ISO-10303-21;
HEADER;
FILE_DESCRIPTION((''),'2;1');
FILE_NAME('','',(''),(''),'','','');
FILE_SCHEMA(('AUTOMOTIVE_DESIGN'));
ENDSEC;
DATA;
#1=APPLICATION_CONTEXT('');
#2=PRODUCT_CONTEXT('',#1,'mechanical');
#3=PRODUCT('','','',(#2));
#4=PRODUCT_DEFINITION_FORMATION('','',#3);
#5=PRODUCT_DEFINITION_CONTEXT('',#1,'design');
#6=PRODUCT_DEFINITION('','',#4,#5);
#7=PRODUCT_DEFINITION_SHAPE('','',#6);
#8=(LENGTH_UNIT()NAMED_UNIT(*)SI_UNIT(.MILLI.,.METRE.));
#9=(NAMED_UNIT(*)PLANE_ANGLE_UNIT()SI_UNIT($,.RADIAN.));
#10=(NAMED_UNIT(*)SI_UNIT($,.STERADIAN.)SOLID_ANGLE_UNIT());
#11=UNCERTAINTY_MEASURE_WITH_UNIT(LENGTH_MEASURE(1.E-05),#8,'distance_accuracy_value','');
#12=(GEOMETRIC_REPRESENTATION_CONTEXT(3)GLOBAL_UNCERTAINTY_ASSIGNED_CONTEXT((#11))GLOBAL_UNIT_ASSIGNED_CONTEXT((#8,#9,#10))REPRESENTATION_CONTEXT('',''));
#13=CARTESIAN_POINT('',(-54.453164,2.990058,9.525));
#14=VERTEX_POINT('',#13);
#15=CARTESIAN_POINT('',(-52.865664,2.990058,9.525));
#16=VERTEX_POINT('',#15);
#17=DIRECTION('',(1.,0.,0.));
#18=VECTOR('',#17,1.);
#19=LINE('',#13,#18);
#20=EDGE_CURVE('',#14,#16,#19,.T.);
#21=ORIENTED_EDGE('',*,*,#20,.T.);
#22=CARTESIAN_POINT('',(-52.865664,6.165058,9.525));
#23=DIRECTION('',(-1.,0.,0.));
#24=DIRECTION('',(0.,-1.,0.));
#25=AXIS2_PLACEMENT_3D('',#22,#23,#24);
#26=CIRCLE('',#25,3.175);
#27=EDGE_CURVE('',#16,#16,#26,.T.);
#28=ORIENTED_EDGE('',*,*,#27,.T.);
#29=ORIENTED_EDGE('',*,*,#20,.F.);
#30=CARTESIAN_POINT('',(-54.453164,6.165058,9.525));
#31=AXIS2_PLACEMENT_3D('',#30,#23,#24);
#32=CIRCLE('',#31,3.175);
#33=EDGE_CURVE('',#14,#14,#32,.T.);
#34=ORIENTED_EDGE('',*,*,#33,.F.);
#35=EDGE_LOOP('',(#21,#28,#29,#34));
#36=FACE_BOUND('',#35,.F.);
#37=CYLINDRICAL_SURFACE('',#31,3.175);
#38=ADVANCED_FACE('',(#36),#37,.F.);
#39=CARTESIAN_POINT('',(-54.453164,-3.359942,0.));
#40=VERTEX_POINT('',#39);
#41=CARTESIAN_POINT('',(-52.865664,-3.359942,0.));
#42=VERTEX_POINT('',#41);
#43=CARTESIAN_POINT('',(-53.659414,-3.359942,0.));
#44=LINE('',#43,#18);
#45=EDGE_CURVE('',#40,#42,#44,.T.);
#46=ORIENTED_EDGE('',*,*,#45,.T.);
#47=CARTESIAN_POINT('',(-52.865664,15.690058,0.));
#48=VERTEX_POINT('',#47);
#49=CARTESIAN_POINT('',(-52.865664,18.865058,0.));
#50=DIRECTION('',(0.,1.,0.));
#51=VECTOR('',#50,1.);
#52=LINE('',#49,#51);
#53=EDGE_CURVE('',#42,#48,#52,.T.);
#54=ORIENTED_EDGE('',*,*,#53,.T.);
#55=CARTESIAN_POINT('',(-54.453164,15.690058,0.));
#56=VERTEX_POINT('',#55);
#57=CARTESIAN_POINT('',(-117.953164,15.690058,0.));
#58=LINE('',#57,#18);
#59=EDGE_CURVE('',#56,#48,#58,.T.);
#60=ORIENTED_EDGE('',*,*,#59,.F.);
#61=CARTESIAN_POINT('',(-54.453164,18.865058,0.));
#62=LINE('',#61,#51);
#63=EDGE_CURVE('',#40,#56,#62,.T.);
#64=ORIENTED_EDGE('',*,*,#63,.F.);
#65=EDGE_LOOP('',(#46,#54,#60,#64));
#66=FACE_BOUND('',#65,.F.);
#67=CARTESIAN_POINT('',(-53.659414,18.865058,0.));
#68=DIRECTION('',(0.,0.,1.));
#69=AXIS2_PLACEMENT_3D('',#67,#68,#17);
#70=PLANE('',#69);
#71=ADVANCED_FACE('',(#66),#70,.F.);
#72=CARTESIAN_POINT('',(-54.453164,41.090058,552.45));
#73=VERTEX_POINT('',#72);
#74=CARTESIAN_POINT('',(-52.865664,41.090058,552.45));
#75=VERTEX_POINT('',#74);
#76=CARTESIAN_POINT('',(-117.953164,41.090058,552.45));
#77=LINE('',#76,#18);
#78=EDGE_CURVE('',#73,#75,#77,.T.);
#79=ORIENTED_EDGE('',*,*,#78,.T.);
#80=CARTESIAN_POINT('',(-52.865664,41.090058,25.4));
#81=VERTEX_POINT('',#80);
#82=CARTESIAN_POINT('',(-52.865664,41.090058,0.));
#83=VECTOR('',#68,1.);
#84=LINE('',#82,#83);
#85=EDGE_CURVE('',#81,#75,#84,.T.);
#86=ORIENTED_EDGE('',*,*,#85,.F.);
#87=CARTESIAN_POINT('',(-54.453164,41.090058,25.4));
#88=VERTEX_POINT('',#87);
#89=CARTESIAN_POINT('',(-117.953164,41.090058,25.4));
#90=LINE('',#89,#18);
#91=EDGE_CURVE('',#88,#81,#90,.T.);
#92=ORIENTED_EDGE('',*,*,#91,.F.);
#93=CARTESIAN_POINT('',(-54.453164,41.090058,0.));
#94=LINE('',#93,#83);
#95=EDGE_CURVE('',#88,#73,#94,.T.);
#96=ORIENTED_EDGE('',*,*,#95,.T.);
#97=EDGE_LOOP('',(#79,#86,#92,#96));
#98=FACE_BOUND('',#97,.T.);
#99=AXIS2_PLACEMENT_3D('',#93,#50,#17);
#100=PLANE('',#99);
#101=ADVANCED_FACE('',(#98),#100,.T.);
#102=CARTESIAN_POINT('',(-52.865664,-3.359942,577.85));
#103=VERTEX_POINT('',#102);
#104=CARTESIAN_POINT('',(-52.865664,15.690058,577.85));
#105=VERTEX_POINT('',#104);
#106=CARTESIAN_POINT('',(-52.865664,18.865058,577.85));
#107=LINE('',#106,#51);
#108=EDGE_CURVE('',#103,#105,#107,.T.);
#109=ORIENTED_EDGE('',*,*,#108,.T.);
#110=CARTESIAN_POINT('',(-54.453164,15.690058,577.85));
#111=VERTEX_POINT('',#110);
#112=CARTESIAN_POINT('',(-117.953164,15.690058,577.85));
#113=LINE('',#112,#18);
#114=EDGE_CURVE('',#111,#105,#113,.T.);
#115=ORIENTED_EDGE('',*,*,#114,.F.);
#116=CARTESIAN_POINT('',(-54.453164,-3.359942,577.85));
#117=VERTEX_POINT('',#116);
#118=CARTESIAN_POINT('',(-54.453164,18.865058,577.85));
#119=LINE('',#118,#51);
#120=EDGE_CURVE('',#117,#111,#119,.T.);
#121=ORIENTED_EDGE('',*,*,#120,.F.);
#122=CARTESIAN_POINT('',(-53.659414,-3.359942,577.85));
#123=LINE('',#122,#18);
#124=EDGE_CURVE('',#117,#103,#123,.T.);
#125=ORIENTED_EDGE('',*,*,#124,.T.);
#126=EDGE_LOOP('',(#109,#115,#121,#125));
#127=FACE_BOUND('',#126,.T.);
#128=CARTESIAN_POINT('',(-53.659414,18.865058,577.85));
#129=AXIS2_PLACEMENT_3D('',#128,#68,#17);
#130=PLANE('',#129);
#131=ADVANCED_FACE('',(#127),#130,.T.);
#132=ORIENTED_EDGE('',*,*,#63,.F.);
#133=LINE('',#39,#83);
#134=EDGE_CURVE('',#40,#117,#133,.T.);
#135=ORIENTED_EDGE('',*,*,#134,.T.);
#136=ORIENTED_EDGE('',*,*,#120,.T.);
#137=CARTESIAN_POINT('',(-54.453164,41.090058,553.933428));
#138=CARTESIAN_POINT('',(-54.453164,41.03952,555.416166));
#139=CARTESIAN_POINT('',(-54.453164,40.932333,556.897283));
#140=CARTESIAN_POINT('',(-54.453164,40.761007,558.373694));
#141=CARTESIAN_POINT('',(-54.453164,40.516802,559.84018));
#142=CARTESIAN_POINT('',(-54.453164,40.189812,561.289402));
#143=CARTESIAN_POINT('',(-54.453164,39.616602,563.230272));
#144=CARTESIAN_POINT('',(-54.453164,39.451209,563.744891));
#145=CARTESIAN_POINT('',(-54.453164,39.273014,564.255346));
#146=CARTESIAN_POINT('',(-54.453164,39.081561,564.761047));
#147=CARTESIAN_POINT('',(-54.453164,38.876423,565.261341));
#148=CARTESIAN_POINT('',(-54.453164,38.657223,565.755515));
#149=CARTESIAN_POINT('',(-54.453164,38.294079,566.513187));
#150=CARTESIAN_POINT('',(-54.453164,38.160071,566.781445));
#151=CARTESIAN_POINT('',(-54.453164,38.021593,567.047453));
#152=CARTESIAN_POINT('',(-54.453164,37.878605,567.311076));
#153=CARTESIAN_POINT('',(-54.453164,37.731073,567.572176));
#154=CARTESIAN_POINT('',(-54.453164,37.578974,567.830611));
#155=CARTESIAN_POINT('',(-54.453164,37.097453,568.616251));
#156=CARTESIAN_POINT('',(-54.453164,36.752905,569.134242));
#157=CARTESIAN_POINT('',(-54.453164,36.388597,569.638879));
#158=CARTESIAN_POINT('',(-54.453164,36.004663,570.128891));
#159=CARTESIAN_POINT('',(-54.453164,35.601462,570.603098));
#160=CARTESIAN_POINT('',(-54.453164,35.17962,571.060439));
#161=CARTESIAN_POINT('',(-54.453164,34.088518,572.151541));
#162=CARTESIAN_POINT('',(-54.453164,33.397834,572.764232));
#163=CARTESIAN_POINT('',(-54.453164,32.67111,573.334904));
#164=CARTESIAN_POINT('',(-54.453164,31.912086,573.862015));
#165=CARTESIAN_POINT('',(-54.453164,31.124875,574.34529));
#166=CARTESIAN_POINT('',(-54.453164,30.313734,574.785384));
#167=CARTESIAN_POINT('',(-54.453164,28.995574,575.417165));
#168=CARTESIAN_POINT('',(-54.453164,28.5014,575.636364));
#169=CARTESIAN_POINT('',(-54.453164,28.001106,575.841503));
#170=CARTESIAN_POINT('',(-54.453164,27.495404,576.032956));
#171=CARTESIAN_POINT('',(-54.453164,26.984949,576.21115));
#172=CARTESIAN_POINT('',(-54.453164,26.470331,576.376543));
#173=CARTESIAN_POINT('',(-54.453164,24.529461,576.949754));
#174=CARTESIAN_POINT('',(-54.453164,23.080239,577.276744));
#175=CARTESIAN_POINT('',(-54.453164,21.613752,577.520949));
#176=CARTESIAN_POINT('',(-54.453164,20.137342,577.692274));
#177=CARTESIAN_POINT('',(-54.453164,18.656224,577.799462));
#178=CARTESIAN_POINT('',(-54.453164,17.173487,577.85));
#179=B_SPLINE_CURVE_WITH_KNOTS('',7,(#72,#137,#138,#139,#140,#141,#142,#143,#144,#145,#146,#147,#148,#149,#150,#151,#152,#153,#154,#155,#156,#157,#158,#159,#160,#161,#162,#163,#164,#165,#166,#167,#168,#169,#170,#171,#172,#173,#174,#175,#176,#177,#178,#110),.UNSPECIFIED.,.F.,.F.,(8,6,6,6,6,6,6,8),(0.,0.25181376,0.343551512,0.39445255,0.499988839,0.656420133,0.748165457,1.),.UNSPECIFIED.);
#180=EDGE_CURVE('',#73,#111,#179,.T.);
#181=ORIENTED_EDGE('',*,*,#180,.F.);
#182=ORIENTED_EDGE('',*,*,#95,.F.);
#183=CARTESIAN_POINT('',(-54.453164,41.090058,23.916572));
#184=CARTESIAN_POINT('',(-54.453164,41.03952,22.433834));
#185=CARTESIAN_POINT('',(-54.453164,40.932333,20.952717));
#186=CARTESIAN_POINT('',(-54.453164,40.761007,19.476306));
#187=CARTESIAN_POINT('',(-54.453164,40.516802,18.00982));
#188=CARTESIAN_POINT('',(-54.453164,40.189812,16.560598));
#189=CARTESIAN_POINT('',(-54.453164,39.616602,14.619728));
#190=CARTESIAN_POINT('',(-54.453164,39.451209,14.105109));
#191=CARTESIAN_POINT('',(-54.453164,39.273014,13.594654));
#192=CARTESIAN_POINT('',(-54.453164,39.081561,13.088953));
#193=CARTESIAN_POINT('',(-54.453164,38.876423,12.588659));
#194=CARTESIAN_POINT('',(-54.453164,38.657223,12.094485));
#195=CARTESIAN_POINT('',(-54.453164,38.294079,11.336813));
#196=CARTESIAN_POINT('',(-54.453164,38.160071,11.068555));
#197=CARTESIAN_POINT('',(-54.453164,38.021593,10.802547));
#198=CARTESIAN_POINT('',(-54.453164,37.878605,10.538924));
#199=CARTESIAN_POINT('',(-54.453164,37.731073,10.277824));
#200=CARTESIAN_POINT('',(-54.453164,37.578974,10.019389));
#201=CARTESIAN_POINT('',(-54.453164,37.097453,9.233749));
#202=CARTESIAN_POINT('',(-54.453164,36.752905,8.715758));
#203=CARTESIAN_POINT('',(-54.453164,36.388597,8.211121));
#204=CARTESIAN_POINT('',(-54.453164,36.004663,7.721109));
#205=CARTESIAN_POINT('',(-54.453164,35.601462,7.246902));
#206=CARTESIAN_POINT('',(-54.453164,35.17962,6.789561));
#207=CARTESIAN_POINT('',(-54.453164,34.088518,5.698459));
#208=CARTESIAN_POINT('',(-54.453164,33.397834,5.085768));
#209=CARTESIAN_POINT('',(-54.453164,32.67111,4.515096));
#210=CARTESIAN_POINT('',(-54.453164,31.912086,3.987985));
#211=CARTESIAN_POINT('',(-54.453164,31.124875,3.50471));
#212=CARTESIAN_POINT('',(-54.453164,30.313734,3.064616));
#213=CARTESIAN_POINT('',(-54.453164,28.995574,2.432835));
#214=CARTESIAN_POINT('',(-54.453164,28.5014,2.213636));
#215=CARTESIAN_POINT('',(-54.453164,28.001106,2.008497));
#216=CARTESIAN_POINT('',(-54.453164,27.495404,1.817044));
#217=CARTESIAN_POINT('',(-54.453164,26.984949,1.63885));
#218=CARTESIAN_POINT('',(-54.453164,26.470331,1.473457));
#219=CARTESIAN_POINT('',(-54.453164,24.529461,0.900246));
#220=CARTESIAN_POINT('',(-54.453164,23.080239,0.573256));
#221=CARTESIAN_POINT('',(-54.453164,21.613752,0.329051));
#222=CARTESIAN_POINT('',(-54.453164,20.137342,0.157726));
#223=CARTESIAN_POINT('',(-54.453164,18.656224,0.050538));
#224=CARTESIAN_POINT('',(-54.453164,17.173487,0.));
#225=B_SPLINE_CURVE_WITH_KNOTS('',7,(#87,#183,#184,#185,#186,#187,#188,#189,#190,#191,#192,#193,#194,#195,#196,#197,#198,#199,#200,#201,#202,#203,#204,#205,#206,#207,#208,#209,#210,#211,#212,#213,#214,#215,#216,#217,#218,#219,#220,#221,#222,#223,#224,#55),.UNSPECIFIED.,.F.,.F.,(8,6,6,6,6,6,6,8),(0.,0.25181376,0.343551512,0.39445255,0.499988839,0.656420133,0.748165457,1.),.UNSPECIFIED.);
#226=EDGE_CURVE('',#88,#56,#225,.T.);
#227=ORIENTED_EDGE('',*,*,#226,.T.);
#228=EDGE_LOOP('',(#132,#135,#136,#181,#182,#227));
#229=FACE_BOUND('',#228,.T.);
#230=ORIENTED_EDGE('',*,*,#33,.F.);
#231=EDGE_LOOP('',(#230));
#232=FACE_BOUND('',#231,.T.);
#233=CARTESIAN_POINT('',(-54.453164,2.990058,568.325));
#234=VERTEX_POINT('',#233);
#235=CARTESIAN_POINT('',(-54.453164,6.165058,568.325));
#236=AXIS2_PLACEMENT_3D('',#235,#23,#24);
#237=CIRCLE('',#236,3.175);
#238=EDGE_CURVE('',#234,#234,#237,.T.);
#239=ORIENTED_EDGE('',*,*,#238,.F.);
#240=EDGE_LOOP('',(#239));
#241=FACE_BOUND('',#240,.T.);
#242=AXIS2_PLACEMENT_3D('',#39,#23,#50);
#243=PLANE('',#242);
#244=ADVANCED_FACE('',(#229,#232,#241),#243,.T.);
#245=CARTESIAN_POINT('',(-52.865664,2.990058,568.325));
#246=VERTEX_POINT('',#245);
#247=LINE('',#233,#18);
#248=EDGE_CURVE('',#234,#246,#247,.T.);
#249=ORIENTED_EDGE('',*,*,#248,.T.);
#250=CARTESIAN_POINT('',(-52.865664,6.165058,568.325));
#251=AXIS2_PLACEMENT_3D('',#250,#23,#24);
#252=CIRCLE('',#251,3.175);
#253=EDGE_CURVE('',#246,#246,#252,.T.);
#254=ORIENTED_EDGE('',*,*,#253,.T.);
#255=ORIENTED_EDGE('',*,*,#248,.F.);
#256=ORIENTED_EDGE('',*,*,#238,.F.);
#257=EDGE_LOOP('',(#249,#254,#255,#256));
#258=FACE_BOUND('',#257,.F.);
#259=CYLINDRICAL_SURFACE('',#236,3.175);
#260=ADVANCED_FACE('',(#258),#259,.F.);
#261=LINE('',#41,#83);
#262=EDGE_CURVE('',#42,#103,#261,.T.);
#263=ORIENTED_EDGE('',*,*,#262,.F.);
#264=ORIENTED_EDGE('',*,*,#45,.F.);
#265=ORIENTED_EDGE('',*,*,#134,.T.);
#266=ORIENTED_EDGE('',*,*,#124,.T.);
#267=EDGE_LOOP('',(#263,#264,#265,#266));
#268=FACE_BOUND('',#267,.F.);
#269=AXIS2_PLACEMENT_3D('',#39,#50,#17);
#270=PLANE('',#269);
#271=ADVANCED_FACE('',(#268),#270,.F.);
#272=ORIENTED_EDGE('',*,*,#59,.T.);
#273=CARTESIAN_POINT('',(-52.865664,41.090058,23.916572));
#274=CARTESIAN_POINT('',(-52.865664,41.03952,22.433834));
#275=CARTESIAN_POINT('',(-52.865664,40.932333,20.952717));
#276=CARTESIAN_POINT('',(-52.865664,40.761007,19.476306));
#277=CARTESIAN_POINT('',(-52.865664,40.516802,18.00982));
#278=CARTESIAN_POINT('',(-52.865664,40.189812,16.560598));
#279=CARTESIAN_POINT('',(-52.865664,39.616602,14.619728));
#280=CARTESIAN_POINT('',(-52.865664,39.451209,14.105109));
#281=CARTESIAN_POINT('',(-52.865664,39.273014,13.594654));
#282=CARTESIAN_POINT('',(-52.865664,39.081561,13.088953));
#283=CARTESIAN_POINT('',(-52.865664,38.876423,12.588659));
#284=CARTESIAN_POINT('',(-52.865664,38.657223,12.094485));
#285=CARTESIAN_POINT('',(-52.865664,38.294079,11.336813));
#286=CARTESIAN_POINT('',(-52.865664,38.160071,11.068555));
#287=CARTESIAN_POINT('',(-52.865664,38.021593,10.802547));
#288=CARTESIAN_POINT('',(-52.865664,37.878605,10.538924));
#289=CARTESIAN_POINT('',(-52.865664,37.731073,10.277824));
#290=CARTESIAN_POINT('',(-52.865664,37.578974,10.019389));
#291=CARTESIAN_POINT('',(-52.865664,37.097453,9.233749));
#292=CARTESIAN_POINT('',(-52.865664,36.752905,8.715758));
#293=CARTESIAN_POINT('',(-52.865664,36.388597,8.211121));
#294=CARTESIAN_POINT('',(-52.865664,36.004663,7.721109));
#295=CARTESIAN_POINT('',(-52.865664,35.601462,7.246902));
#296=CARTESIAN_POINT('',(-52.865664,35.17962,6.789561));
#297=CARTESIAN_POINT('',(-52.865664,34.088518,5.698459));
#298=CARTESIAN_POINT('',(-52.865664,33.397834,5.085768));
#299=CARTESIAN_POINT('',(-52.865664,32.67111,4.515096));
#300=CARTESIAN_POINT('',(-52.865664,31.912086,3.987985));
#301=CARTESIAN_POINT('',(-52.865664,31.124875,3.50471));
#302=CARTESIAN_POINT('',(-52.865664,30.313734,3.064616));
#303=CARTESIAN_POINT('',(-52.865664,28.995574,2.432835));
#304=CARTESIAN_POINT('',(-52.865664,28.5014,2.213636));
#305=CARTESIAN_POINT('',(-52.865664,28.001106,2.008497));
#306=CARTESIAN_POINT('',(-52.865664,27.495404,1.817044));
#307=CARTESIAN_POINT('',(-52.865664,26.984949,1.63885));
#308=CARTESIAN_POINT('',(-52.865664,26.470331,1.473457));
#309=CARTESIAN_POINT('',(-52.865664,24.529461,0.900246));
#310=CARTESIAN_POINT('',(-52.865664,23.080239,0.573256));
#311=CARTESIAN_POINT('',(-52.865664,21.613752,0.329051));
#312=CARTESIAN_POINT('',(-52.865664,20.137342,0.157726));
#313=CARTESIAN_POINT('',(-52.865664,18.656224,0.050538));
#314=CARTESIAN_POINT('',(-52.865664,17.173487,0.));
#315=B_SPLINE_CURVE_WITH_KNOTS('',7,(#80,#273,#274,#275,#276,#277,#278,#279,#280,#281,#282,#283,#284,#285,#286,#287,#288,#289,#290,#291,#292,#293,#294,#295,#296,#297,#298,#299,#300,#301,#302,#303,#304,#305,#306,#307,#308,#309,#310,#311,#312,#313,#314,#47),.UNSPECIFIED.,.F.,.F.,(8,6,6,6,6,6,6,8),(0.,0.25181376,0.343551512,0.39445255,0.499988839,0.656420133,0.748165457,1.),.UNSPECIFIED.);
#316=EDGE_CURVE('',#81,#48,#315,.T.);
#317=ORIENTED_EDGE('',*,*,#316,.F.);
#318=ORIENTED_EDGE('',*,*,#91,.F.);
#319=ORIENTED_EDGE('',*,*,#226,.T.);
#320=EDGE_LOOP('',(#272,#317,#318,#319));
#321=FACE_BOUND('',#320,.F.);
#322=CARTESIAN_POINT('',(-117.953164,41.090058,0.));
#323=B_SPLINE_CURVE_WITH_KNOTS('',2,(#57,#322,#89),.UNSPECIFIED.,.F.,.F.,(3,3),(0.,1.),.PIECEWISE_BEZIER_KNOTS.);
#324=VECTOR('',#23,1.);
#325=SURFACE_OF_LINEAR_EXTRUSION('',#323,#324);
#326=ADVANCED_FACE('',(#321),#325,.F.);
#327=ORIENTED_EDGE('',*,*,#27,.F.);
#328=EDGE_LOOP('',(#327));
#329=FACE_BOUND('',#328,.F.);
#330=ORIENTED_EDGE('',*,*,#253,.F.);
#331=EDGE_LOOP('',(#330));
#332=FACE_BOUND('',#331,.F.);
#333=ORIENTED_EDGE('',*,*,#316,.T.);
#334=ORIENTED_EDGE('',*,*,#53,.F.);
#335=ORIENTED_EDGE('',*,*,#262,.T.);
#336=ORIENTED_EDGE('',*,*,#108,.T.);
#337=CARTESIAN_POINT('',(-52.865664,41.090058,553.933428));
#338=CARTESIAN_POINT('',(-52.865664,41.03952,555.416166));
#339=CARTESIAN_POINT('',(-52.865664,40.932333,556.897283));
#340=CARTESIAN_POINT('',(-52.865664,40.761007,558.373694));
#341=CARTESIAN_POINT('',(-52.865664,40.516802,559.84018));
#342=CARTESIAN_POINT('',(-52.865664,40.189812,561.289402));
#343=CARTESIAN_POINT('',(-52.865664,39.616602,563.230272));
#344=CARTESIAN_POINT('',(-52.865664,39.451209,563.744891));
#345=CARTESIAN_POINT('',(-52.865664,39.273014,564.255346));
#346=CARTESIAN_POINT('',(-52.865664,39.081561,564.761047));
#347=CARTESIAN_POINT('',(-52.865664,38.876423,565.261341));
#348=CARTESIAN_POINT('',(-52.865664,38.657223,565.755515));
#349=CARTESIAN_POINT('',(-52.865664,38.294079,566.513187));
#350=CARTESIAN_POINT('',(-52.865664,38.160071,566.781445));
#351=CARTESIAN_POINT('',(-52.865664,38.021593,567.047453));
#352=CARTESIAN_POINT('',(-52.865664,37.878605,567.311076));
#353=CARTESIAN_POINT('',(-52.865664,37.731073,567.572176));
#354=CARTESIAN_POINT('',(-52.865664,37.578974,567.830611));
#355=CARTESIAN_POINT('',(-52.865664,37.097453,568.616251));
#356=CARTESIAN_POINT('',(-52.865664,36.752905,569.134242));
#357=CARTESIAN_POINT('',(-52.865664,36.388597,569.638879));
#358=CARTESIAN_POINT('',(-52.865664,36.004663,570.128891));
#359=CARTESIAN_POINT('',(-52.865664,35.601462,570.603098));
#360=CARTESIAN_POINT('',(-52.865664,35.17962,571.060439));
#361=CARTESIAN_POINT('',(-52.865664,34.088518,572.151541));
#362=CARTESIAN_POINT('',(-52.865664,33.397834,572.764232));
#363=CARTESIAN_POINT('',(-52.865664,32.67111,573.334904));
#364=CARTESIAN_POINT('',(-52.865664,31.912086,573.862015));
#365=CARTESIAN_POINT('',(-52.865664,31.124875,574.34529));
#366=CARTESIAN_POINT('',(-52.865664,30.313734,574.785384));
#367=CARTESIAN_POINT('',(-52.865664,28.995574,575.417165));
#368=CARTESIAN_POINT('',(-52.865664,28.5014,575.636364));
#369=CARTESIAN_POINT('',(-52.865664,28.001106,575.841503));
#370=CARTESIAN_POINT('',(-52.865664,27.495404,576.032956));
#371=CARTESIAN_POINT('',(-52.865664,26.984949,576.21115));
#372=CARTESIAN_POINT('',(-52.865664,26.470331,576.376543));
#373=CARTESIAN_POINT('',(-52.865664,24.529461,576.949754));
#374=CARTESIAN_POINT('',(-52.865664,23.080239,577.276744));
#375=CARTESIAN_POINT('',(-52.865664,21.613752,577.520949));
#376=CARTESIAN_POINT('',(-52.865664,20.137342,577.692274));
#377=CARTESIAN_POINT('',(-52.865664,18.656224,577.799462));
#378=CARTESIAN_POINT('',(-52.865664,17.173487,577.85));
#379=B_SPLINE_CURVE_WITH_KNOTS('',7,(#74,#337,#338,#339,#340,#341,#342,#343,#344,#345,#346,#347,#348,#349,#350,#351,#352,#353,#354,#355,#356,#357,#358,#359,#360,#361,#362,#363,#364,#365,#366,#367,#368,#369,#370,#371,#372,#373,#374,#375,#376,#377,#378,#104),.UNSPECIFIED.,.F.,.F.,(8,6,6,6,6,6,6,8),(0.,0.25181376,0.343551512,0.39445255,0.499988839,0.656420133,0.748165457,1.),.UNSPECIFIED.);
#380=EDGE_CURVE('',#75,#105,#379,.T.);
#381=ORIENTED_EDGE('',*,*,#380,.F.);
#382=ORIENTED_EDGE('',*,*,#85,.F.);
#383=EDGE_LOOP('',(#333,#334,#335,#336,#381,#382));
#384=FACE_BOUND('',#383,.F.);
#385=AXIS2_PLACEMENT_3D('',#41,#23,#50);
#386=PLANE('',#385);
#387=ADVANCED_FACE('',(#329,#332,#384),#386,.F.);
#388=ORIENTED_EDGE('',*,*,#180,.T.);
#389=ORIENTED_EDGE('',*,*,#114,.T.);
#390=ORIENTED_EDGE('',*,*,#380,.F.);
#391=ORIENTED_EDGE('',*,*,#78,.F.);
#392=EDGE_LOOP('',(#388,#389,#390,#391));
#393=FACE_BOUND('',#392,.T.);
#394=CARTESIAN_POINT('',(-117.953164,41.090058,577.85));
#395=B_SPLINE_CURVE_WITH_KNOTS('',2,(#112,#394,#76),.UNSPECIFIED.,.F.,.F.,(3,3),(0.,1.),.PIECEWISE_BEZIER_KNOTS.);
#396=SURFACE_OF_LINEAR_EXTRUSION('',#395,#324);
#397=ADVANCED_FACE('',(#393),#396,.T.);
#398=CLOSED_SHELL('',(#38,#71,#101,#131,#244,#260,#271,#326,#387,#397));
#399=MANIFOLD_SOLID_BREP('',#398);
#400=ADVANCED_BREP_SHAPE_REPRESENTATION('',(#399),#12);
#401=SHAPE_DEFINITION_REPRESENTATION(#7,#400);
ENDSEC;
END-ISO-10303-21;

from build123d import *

# Parameters (mm, degrees)
F0_W        = 1.5875
F0_H        = 44.45
F1_DEPTH    = 577.85
F2_R        = 3.175
F3_DEPTH    = 1.5875
F4_T1_DEPTH = 128.5875


# Not quite as in the source:
# - a fillet or chamfer that OpenCascade refuses, or shapes differently, is made with other operations: its cross-section is extruded or revolved along the edge and cut away or added


with BuildPart() as f1:
    # F0 (on Top) → F1 (new body)
    with BuildSketch(Plane.XY):
        with Locations((-53.6594138073, 18.865058393)):
            Rectangle(F0_W, F0_H)
    extrude(amount=F1_DEPTH)

    # F2 (on face) → F3 (cut)
    with BuildSketch(Plane(origin=(-54.4531638073, 0, 0), x_dir=(0, -1, 0), z_dir=(-1, 0, 0))):
        with Locations((-6.165058393, 9.525)):
            Circle(F2_R)
        with Locations((-6.165058393, 568.325)):
            Circle(F2_R)
    extrude(amount=-F3_DEPTH, mode=Mode.SUBTRACT)

    # F4: fillet of radius 25.4 on 2 edges, made by hand

    # F4_s2 → F4_t1 (cut)
    with BuildSketch(Plane.YZ.offset(-117.9531638073)):
        with BuildLine():
            add(Edge.make_bspline(
                [(15.690058393, 577.85), (41.090058393, 577.85), (41.090058393, 552.45)],
                knots=[0, 0, 0, 1, 1, 1], degree=2, weights=[1, 1, 1]))
            Line((41.090058393, 552.45), (41.090058393, 577.85))
            Line((41.090058393, 577.85), (15.690058393, 577.85))
        make_face()
        with BuildLine():
            add(Edge.make_bspline(
                [(15.690058393, 0), (41.090058393, 0), (41.090058393, 25.4)],
                knots=[0, 0, 0, 1, 1, 1], degree=2, weights=[1, 1, 1]))
            Line((41.090058393, 25.4), (41.090058393, 0))
            Line((41.090058393, 0), (15.690058393, 0))
        make_face()
    extrude(amount=F4_T1_DEPTH, mode=Mode.SUBTRACT)


solid = f1.part
